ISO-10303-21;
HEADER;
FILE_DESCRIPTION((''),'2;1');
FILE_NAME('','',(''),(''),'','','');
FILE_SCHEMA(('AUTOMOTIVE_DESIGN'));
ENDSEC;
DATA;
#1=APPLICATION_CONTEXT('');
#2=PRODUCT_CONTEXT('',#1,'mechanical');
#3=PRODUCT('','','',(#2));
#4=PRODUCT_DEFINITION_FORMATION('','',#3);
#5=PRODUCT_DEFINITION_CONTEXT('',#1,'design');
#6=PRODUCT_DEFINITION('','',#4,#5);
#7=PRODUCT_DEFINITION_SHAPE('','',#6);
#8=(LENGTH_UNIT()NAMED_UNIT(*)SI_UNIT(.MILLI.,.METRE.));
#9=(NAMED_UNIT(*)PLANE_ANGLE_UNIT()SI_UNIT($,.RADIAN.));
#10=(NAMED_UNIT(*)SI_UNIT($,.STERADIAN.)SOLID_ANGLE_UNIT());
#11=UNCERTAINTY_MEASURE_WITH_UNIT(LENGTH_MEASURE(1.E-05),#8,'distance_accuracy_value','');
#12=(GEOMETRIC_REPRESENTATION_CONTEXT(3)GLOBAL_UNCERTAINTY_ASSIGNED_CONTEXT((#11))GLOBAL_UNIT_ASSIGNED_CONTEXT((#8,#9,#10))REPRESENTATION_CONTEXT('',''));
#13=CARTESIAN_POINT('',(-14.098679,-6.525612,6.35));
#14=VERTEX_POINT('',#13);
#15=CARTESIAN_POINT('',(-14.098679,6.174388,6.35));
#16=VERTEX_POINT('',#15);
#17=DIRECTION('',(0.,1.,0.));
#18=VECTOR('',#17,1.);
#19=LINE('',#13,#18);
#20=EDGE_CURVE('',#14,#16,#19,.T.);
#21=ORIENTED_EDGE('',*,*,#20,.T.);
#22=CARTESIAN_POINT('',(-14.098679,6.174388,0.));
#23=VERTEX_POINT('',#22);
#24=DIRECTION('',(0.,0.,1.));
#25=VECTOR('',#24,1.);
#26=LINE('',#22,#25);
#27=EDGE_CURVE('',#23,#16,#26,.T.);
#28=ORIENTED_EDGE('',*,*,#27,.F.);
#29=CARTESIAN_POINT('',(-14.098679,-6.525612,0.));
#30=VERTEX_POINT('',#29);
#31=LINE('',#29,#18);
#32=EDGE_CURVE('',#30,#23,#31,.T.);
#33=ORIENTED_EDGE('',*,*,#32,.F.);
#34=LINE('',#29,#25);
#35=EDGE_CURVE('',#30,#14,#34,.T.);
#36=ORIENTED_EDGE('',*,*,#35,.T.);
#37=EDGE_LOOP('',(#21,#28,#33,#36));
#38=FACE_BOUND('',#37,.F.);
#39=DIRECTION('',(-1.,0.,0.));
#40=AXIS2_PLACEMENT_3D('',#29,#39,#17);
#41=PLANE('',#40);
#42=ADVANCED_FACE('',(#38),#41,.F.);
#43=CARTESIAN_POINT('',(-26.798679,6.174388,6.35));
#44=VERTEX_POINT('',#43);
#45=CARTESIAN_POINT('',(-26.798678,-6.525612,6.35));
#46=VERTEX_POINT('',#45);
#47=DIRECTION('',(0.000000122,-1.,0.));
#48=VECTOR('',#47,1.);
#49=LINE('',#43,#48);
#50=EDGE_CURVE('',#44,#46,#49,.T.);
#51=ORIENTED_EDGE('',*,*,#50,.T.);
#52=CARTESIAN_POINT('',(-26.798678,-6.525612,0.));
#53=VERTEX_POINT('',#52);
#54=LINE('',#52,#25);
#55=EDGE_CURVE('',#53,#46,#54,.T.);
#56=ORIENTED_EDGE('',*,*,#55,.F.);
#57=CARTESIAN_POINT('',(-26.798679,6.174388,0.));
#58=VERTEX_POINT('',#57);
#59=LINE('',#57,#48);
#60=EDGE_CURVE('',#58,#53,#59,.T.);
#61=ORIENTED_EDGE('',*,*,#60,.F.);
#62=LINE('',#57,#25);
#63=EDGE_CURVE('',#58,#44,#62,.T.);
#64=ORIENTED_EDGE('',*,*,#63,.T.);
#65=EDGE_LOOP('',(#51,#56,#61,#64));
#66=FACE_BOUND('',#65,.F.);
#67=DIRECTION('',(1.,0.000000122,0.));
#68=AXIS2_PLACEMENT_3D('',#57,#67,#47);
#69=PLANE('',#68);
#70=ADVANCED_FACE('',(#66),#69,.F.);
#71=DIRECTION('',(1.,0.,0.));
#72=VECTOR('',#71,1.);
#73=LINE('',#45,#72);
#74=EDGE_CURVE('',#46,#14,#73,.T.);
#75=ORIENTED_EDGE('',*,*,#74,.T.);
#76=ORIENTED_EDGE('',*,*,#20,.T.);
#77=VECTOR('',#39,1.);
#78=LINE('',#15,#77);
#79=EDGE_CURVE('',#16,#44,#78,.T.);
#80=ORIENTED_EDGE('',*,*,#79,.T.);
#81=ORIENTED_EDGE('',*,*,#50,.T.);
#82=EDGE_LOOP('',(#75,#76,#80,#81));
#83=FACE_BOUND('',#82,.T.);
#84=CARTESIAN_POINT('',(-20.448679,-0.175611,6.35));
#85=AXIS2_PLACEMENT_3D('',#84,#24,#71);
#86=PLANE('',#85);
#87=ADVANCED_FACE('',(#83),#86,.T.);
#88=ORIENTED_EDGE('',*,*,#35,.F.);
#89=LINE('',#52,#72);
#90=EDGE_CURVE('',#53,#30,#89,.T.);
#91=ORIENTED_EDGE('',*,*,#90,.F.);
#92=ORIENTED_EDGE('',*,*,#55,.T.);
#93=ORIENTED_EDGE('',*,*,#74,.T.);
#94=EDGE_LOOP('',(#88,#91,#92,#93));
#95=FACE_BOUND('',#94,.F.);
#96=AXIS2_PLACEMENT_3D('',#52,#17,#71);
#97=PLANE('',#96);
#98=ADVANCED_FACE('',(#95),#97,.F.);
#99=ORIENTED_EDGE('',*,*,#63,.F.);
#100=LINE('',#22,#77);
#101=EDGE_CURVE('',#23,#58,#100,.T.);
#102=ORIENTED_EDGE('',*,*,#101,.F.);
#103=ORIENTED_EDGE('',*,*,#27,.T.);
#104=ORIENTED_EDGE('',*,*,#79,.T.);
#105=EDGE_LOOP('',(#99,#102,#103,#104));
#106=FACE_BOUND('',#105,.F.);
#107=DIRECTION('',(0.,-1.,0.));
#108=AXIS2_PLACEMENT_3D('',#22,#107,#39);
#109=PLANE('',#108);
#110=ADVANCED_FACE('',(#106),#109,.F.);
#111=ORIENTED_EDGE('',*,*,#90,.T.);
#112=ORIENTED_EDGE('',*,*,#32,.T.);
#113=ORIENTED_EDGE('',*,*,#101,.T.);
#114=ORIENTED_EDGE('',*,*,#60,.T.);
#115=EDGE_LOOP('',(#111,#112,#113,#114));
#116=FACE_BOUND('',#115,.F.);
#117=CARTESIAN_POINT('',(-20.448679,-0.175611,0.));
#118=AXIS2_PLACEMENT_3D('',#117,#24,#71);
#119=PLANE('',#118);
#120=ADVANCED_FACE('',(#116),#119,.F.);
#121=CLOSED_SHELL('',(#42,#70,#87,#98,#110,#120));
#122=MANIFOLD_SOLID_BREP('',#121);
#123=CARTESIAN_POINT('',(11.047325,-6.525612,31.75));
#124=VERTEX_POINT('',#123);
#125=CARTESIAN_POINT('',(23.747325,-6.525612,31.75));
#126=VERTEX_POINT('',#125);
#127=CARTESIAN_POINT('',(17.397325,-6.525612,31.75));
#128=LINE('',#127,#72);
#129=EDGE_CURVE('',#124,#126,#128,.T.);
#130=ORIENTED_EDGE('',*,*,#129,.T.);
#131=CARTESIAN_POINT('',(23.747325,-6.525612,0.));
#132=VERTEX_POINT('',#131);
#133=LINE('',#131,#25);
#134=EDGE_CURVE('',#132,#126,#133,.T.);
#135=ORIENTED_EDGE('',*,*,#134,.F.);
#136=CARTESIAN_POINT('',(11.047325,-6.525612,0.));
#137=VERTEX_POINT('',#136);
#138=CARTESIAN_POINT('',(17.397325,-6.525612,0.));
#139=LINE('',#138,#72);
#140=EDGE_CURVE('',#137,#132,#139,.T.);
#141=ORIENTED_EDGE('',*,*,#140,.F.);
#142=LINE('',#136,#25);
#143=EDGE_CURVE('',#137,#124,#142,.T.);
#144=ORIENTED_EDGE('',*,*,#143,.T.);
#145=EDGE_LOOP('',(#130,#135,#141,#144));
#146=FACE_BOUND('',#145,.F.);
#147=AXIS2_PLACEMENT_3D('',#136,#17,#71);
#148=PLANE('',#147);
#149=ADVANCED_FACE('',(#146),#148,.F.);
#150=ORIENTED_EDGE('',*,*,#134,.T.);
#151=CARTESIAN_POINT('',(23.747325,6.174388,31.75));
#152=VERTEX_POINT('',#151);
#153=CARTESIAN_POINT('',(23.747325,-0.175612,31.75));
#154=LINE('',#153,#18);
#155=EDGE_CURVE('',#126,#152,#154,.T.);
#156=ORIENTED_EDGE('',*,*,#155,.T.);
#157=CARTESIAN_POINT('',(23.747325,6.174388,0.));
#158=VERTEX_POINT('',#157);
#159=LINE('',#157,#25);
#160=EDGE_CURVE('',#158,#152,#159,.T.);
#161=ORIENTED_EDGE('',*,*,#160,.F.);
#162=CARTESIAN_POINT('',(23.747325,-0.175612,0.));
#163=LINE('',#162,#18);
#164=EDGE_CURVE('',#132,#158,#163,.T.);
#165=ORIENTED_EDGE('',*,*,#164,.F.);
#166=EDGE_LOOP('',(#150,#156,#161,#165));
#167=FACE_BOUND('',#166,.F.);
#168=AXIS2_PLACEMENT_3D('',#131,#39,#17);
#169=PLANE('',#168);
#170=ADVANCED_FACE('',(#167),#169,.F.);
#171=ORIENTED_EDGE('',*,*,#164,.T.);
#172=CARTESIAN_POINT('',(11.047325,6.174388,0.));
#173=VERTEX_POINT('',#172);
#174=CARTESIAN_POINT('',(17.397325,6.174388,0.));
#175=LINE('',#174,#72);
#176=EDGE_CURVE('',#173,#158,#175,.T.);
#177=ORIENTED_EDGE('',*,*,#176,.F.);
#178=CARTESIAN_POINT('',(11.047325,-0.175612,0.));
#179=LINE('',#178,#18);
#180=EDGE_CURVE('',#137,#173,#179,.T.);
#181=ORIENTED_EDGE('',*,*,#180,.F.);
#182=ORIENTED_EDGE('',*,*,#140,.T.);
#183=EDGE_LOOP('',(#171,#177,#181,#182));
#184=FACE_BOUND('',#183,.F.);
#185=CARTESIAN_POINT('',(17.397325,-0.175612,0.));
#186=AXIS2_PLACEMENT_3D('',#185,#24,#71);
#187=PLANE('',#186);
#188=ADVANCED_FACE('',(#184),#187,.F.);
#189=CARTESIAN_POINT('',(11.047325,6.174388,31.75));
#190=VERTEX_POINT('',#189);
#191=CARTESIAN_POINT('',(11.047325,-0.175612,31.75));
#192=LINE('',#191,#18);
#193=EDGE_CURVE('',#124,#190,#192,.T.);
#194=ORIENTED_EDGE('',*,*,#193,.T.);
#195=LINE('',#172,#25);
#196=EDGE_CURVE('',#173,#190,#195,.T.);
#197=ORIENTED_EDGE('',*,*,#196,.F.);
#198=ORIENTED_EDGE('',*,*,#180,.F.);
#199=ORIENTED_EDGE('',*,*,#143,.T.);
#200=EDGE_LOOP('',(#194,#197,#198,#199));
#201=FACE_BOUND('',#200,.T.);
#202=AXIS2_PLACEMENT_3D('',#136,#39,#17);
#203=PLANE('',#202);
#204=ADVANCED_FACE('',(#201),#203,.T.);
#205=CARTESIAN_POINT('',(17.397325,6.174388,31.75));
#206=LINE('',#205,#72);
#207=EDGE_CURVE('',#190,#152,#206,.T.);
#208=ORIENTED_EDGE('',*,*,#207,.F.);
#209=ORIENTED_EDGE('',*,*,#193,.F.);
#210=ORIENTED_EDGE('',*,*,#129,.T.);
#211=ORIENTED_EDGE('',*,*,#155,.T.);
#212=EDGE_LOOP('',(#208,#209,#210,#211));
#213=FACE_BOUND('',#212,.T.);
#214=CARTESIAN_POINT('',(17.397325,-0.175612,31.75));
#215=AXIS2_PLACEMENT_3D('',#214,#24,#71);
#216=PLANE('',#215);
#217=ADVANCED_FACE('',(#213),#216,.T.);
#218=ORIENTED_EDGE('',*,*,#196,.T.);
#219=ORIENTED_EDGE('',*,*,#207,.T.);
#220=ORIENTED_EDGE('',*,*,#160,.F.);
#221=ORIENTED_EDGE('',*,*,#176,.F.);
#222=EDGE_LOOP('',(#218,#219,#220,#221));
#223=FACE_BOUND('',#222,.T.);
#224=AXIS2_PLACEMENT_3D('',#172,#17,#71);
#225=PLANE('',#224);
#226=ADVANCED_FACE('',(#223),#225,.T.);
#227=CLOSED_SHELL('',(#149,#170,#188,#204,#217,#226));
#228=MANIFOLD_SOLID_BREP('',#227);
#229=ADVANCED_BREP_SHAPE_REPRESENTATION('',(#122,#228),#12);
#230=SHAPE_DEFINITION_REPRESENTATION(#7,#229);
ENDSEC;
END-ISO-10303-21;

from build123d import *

# Parameters (mm, degrees)
F1_DEPTH = 6.35
F0_W     = 12.7
F0_H     = 12.7
F2_DEPTH = 31.75


# Not quite as in the source:
# - ends of sketch curves that miss each other by under 0.0002 mm in the source are joined


with BuildPart() as f1:
    # F0 (on Top) → F1 (new body)
    with BuildSketch(Plane.XY):
        Polygon((-14.0986793399, 6.1743884951), (-26.7986793399, 6.1743884951), (-26.7986777842, -6.5256115049), (-14.0986793399, -6.5256115049), align=None)
    extrude(amount=F1_DEPTH)


with BuildPart() as f2:
    # F0 (on Top) → F2 (new body)
    with BuildSketch(Plane.XY):
        with Locations((17.397325097, -0.1756115049)):
            Rectangle(F0_W, F0_H)
    extrude(amount=F2_DEPTH)


solid = Compound([f1.part, f2.part])
